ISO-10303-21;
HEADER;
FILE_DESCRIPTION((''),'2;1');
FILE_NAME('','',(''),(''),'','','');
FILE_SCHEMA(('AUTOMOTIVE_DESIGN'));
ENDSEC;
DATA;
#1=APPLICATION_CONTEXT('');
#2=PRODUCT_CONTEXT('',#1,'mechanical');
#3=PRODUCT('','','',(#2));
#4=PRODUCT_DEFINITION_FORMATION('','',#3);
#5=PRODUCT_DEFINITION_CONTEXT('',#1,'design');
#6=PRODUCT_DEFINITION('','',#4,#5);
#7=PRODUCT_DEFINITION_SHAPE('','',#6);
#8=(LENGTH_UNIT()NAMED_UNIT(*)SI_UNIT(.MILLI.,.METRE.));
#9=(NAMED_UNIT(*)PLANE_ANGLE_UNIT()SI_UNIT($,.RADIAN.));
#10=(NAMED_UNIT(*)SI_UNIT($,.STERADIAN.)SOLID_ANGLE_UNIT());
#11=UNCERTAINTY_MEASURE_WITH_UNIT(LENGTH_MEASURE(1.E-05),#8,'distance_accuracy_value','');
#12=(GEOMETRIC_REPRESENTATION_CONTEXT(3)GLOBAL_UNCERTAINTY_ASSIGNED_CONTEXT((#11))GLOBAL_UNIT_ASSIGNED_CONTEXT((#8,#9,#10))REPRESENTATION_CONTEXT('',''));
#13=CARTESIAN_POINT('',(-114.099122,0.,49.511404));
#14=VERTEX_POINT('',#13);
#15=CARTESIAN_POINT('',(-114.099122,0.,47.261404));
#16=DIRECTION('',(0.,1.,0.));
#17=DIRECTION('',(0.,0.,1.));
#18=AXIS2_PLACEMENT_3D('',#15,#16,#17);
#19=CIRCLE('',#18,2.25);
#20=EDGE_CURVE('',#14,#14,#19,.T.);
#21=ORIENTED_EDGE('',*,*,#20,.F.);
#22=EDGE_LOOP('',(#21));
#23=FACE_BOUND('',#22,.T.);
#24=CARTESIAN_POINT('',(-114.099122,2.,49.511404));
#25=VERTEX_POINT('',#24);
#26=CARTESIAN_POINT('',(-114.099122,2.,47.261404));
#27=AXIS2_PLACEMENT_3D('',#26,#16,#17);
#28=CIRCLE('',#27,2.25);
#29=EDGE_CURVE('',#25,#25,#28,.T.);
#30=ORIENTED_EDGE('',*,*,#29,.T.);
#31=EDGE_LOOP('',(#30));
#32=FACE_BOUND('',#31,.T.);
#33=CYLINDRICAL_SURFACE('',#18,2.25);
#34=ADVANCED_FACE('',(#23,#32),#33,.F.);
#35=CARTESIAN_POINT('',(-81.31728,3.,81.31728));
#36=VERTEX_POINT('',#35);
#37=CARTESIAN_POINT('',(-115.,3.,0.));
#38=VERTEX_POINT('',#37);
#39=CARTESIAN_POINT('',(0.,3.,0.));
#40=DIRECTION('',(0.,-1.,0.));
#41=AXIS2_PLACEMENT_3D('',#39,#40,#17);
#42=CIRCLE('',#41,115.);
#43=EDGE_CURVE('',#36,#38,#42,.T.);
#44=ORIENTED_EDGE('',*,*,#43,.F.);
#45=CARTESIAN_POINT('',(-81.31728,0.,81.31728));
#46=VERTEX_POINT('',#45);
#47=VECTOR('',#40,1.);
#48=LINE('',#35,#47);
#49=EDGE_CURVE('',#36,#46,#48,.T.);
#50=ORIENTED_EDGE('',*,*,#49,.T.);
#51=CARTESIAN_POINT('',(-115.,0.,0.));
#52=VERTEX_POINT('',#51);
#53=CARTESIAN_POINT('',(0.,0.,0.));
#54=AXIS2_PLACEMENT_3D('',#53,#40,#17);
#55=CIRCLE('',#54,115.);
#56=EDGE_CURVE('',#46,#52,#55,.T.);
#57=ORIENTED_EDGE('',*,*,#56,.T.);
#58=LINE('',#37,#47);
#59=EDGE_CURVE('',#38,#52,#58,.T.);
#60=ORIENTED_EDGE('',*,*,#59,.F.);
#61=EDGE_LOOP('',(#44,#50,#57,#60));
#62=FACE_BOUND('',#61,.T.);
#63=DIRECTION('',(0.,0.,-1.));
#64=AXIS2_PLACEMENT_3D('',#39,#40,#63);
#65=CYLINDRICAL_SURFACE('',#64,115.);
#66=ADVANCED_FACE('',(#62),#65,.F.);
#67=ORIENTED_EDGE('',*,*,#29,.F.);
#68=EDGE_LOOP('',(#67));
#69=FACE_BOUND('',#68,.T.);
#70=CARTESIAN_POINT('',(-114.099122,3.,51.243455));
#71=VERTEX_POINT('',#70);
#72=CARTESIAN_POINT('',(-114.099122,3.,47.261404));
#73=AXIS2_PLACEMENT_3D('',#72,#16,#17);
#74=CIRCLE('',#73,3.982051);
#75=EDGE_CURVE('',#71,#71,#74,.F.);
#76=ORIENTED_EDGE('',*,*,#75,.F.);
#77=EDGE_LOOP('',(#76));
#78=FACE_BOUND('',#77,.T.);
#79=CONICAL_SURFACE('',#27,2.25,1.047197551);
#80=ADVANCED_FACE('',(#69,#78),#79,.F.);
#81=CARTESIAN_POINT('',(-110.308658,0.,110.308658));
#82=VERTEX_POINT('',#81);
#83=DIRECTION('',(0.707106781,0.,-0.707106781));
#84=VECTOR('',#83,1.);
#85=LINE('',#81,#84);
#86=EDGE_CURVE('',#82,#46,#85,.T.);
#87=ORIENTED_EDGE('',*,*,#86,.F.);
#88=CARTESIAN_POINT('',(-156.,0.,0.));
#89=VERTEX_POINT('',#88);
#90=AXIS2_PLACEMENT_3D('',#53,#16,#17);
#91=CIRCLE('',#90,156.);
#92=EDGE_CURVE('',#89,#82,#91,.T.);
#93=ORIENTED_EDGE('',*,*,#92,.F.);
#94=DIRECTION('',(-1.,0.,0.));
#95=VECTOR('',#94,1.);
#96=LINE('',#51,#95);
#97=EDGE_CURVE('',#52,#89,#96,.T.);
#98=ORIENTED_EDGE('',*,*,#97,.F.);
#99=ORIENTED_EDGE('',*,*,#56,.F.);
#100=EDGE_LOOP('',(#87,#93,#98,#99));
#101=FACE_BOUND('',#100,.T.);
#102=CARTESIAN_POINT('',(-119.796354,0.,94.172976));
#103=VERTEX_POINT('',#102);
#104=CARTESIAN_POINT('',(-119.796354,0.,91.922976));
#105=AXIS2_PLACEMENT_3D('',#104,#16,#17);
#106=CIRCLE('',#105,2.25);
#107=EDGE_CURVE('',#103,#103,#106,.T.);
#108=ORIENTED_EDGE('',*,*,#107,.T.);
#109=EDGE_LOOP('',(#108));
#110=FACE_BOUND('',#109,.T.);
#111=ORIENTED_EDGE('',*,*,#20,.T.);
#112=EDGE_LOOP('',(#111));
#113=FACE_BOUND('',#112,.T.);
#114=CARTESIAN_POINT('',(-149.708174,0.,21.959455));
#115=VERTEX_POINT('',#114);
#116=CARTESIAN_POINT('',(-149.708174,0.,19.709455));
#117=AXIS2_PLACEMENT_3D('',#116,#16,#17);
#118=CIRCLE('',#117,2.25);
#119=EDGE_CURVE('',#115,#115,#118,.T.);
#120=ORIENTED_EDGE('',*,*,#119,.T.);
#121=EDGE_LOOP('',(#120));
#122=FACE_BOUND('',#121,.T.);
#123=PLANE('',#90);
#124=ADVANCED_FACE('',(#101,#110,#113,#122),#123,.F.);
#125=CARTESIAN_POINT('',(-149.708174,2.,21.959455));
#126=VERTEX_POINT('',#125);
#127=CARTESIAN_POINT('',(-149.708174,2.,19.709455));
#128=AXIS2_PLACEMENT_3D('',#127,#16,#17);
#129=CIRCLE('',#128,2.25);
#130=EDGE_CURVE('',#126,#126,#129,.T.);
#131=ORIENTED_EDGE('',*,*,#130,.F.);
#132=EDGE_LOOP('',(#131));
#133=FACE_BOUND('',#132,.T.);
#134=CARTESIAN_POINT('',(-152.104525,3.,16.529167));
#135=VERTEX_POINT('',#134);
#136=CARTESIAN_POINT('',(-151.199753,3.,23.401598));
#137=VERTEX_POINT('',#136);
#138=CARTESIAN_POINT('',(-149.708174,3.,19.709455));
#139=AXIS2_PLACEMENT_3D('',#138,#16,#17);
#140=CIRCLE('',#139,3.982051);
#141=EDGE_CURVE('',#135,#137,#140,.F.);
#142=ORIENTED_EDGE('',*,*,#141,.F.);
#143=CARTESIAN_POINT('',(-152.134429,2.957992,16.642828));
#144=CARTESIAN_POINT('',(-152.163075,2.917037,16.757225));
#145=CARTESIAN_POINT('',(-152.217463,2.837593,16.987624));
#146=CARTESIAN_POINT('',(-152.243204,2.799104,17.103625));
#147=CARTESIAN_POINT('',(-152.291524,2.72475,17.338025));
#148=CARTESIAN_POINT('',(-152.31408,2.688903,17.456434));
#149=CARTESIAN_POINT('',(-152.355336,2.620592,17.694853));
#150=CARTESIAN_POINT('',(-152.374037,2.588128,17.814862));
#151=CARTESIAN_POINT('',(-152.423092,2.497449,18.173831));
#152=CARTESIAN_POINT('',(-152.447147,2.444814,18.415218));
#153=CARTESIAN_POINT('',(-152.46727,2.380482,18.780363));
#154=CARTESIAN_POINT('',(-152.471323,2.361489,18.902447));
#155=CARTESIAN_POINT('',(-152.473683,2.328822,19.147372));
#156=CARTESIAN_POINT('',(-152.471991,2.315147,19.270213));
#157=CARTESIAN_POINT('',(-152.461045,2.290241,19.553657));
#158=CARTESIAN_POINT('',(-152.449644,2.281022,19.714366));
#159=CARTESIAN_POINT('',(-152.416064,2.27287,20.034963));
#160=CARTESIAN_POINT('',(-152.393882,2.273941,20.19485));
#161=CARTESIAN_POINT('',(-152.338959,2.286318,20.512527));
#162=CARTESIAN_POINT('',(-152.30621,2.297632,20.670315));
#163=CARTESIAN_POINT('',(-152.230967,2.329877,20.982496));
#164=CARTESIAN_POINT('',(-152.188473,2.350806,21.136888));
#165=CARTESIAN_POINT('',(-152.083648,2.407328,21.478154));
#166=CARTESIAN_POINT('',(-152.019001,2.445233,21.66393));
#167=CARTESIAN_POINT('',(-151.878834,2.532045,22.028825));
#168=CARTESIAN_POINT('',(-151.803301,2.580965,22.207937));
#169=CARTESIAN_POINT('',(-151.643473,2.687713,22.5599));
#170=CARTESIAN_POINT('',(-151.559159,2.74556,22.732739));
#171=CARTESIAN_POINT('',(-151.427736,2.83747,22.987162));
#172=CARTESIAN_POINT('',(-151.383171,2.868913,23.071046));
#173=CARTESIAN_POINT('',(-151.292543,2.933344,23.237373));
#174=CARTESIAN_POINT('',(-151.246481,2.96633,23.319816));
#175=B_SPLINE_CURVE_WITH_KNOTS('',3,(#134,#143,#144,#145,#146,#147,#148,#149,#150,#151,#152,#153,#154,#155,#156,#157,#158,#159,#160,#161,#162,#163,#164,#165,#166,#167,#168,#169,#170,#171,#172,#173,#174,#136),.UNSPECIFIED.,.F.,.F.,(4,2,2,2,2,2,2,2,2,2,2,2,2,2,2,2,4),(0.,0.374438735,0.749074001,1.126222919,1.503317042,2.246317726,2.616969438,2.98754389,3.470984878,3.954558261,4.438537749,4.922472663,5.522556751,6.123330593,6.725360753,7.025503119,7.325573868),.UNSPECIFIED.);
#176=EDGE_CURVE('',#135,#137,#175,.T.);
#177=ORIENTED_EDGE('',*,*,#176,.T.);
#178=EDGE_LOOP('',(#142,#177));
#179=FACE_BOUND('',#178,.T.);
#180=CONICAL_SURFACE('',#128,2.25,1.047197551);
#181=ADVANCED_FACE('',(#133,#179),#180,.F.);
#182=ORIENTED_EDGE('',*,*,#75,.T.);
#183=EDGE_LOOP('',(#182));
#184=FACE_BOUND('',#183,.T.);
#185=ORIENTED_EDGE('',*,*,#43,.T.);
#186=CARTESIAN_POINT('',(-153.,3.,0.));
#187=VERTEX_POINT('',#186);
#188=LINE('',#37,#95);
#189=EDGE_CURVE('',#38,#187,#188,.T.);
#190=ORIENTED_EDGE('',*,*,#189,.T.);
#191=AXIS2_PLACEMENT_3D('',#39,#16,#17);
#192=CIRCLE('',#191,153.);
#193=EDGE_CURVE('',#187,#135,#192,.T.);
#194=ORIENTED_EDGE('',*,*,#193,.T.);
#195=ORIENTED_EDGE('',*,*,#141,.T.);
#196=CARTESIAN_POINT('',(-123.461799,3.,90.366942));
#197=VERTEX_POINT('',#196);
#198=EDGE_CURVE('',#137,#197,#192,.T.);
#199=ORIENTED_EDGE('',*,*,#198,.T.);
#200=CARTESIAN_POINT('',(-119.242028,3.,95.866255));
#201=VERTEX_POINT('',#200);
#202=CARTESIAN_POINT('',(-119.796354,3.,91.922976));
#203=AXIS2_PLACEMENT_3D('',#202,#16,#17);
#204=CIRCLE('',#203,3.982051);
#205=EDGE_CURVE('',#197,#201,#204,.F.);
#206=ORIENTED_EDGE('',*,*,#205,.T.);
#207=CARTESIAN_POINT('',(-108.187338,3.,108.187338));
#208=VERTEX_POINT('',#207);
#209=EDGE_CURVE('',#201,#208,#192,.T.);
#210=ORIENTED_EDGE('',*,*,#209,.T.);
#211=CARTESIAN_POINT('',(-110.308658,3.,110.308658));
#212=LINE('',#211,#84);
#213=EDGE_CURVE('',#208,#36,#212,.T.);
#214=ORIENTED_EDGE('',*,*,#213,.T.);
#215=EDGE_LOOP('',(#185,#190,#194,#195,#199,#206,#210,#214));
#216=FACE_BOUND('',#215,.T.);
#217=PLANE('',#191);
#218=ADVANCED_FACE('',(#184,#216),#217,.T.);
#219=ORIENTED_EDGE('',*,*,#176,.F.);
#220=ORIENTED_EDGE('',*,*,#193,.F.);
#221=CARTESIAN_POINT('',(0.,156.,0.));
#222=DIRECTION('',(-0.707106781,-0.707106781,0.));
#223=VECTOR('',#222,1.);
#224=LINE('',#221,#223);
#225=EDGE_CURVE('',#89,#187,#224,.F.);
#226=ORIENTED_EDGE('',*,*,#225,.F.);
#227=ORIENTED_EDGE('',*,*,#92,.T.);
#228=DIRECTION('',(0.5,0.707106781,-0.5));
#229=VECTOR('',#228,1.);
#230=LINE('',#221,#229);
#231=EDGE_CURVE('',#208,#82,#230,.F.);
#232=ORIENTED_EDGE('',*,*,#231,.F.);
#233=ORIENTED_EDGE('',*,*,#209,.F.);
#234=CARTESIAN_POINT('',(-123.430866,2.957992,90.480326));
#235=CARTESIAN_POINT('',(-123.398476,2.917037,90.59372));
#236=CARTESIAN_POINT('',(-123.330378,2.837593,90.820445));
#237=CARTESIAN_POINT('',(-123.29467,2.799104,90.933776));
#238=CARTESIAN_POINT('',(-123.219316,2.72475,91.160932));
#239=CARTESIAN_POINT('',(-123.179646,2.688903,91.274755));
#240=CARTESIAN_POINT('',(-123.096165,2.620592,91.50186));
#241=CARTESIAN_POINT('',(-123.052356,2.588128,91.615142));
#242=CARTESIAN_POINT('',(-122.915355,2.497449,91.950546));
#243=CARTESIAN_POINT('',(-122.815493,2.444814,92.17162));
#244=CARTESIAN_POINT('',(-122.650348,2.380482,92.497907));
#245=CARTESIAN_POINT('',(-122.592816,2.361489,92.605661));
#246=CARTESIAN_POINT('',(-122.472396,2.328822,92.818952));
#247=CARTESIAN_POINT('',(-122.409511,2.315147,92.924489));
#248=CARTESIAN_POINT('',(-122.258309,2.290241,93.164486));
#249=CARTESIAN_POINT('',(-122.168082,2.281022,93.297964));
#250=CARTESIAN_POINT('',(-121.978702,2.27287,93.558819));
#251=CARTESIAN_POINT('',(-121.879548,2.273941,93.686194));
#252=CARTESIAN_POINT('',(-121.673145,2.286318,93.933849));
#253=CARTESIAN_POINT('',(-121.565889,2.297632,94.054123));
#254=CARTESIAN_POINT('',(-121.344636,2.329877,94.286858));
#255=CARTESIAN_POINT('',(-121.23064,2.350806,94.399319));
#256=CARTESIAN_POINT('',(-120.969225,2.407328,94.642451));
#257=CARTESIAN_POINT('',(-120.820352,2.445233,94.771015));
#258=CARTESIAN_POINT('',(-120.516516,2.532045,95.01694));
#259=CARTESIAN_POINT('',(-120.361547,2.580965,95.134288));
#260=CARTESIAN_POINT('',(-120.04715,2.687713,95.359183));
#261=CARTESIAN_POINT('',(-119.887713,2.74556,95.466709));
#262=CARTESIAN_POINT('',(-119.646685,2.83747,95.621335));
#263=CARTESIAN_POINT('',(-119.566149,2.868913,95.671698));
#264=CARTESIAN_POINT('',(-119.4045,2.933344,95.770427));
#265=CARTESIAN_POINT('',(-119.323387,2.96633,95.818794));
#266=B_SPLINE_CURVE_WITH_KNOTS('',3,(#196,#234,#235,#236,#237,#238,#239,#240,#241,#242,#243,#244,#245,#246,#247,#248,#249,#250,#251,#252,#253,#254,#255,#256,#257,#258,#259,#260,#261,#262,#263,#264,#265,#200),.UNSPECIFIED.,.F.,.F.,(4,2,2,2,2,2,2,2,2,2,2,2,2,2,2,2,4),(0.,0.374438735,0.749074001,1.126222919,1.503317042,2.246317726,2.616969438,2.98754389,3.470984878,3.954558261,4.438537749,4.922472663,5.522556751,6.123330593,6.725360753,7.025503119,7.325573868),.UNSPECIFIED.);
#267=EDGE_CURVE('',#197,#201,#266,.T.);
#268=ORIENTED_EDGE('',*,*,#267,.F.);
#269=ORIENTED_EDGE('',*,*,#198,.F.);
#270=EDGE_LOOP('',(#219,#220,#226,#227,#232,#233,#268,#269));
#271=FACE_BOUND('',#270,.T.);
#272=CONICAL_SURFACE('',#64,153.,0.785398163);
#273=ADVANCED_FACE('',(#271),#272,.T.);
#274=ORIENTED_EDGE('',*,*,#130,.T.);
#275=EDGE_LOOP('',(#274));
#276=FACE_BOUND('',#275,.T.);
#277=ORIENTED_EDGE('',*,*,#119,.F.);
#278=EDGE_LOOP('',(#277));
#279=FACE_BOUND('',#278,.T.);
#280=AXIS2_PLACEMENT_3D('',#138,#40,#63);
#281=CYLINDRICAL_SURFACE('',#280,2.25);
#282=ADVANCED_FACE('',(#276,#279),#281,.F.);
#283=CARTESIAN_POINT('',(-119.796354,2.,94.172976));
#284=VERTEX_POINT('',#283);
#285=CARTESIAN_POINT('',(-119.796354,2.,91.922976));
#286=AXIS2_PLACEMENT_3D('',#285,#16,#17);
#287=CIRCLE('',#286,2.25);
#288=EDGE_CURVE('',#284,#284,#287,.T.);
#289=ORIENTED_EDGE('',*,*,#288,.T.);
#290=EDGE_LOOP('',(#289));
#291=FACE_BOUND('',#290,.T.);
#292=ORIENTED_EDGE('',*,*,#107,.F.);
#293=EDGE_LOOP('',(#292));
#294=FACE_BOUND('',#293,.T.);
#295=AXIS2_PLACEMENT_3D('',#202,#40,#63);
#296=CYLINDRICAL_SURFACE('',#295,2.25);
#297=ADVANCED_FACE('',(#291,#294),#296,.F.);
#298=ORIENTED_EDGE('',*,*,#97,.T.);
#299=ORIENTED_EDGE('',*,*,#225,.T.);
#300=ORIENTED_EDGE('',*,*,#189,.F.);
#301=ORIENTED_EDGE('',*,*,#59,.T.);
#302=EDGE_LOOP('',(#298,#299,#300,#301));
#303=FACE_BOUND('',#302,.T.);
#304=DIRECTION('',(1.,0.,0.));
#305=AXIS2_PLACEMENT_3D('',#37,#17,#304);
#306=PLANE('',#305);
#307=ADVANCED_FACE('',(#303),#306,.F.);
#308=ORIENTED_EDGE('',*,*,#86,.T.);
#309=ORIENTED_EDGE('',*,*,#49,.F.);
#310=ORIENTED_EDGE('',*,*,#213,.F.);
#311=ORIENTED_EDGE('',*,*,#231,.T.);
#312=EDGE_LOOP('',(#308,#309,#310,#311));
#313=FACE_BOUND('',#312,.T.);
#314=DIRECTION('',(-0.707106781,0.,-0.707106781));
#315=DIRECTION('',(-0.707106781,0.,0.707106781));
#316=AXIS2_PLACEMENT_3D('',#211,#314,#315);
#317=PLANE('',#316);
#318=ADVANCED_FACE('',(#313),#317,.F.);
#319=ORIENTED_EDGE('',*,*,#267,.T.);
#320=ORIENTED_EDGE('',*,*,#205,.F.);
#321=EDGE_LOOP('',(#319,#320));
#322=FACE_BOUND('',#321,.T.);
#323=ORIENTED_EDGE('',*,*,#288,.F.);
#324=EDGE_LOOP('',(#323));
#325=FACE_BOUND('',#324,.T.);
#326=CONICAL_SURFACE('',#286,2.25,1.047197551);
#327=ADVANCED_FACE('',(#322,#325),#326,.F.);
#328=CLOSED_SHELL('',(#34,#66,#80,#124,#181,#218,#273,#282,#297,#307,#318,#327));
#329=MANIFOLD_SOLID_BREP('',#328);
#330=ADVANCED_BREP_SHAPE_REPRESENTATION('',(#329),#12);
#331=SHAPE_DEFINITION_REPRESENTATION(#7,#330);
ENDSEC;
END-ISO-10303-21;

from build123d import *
from OCP.BRepFilletAPI import BRepFilletAPI_MakeChamfer

# Parameters (mm, degrees)
SKETCH1_R           = 2.25
BOSS_EXTRUDE1_DEPTH = 3
CHAMFER2_SIZE       = 1
CHAMFER2_SIZE2      = 1.732050808
SKETCH2_R           = 2.25
CUT_EXTRUDE1_DEPTH  = 192.083751272
CHAMFER1_SIZE       = 3
CHAMFER3_SIZE       = 1
CHAMFER3_SIZE2      = 1.732050808


with BuildPart() as part:
    # Sketch1 → Boss-Extrude1 (new body)
    with BuildSketch(Plane(origin=(0, 0, 0), x_dir=(1, 0, 0), z_dir=(0, 1, 0))):
        with BuildLine():
            Line((-115, 0), (-156, 0))
            ThreePointArc((-156, 0), (-144.125207072, -59.698615449), (-110.308657865, -110.308657865))
            Line((-110.308657865, -110.308657865), (-81.317279836, -81.317279836))
            ThreePointArc((-81.317279836, -81.317279836), (-106.246146239, -44.008594722), (-115, 0))
        make_face()
        with Locations(Location((-149.708174067, -19.709455025, 0), (0, 0, 270))):
            Circle(SKETCH1_R, mode=Mode.SUBTRACT)
        with Locations(Location((-119.796354384, -91.92297578, 0), (0, 0, 270))):
            Circle(SKETCH1_R, mode=Mode.SUBTRACT)
    extrude(amount=BOSS_EXTRUDE1_DEPTH)

    # Chamfer2: one chamfer whose edges measure the first distance from different faces: ONE call of the kernel's chamfer builder (chamfer() names one face for all edges)
    chamfer2_edges_1 = [part.edges().sort_by_distance(p)[0] for p in [
        (-149.708174067, 3, 17.459455025),
    ]]
    chamfer2_side_1 = [part.faces().sort_by_distance(p)[0] for p in [
        (-149.708174067, 1.5, 17.459455025),
    ]]
    chamfer2_edges_2 = [part.edges().sort_by_distance(p)[0] for p in [
        (-119.796354384, 3, 89.67297578),
    ]]
    chamfer2_side_2 = [part.faces().sort_by_distance(p)[0] for p in [
        (-119.796354384, 1.5, 89.67297578),
    ]]
    chamfer2 = BRepFilletAPI_MakeChamfer(part.part.solid().wrapped)
    for e in chamfer2_edges_1:
        chamfer2.Add(CHAMFER2_SIZE, CHAMFER2_SIZE2, e.wrapped, chamfer2_side_1[0].wrapped)  # the first distance lies on this face
    for e in chamfer2_edges_2:
        chamfer2.Add(CHAMFER2_SIZE, CHAMFER2_SIZE2, e.wrapped, chamfer2_side_2[0].wrapped)  # the first distance lies on this face
    add(Compound.cast(chamfer2.Shape()), mode=Mode.REPLACE)

    # Sketch2 → Cut-Extrude1 (cut, through all)
    with BuildSketch(Plane(origin=(0, 3, 0), x_dir=(1, 0, 0), z_dir=(0, 1, 0))):
        with Locations(Location((-114.099122265, -47.261403897, 0), (0, 0, 270))):
            Circle(SKETCH2_R)
    extrude(amount=-CUT_EXTRUDE1_DEPTH, mode=Mode.SUBTRACT)

    # Chamfer1
    # the kernel refuses this chamfer: 3 mm, written as the material it takes off along each edge
    with BuildSketch(Plane(origin=(0, 3, 0), x_dir=(-0.9987770833709343, 0, -0.04944024406341062), z_dir=(0.04944024406341062, 0, -0.9987770833709343))) as chamfer1_piece_1:
        Polygon((156 - CHAMFER1_SIZE, 0), (156, -CHAMFER1_SIZE), (156, 0), align=None)
    revolve(axis=Axis((0, 3, 0), (0, 1, 0)), revolution_arc=50.667745228, mode=Mode.SUBTRACT)

    # Chamfer3
    chamfer3_edges = [part.edges().sort_by_distance(p)[0] for p in [
        (-114.099122265, 3, 45.011403897),
    ]]
    chamfer3_side = [part.faces().sort_by_distance(p)[0] for p in [
        (-114.099122265, 1.5, 45.011403897),
    ]]
    chamfer(chamfer3_edges, length=CHAMFER3_SIZE, length2=CHAMFER3_SIZE2, reference=chamfer3_side[0])


solid = part.part
